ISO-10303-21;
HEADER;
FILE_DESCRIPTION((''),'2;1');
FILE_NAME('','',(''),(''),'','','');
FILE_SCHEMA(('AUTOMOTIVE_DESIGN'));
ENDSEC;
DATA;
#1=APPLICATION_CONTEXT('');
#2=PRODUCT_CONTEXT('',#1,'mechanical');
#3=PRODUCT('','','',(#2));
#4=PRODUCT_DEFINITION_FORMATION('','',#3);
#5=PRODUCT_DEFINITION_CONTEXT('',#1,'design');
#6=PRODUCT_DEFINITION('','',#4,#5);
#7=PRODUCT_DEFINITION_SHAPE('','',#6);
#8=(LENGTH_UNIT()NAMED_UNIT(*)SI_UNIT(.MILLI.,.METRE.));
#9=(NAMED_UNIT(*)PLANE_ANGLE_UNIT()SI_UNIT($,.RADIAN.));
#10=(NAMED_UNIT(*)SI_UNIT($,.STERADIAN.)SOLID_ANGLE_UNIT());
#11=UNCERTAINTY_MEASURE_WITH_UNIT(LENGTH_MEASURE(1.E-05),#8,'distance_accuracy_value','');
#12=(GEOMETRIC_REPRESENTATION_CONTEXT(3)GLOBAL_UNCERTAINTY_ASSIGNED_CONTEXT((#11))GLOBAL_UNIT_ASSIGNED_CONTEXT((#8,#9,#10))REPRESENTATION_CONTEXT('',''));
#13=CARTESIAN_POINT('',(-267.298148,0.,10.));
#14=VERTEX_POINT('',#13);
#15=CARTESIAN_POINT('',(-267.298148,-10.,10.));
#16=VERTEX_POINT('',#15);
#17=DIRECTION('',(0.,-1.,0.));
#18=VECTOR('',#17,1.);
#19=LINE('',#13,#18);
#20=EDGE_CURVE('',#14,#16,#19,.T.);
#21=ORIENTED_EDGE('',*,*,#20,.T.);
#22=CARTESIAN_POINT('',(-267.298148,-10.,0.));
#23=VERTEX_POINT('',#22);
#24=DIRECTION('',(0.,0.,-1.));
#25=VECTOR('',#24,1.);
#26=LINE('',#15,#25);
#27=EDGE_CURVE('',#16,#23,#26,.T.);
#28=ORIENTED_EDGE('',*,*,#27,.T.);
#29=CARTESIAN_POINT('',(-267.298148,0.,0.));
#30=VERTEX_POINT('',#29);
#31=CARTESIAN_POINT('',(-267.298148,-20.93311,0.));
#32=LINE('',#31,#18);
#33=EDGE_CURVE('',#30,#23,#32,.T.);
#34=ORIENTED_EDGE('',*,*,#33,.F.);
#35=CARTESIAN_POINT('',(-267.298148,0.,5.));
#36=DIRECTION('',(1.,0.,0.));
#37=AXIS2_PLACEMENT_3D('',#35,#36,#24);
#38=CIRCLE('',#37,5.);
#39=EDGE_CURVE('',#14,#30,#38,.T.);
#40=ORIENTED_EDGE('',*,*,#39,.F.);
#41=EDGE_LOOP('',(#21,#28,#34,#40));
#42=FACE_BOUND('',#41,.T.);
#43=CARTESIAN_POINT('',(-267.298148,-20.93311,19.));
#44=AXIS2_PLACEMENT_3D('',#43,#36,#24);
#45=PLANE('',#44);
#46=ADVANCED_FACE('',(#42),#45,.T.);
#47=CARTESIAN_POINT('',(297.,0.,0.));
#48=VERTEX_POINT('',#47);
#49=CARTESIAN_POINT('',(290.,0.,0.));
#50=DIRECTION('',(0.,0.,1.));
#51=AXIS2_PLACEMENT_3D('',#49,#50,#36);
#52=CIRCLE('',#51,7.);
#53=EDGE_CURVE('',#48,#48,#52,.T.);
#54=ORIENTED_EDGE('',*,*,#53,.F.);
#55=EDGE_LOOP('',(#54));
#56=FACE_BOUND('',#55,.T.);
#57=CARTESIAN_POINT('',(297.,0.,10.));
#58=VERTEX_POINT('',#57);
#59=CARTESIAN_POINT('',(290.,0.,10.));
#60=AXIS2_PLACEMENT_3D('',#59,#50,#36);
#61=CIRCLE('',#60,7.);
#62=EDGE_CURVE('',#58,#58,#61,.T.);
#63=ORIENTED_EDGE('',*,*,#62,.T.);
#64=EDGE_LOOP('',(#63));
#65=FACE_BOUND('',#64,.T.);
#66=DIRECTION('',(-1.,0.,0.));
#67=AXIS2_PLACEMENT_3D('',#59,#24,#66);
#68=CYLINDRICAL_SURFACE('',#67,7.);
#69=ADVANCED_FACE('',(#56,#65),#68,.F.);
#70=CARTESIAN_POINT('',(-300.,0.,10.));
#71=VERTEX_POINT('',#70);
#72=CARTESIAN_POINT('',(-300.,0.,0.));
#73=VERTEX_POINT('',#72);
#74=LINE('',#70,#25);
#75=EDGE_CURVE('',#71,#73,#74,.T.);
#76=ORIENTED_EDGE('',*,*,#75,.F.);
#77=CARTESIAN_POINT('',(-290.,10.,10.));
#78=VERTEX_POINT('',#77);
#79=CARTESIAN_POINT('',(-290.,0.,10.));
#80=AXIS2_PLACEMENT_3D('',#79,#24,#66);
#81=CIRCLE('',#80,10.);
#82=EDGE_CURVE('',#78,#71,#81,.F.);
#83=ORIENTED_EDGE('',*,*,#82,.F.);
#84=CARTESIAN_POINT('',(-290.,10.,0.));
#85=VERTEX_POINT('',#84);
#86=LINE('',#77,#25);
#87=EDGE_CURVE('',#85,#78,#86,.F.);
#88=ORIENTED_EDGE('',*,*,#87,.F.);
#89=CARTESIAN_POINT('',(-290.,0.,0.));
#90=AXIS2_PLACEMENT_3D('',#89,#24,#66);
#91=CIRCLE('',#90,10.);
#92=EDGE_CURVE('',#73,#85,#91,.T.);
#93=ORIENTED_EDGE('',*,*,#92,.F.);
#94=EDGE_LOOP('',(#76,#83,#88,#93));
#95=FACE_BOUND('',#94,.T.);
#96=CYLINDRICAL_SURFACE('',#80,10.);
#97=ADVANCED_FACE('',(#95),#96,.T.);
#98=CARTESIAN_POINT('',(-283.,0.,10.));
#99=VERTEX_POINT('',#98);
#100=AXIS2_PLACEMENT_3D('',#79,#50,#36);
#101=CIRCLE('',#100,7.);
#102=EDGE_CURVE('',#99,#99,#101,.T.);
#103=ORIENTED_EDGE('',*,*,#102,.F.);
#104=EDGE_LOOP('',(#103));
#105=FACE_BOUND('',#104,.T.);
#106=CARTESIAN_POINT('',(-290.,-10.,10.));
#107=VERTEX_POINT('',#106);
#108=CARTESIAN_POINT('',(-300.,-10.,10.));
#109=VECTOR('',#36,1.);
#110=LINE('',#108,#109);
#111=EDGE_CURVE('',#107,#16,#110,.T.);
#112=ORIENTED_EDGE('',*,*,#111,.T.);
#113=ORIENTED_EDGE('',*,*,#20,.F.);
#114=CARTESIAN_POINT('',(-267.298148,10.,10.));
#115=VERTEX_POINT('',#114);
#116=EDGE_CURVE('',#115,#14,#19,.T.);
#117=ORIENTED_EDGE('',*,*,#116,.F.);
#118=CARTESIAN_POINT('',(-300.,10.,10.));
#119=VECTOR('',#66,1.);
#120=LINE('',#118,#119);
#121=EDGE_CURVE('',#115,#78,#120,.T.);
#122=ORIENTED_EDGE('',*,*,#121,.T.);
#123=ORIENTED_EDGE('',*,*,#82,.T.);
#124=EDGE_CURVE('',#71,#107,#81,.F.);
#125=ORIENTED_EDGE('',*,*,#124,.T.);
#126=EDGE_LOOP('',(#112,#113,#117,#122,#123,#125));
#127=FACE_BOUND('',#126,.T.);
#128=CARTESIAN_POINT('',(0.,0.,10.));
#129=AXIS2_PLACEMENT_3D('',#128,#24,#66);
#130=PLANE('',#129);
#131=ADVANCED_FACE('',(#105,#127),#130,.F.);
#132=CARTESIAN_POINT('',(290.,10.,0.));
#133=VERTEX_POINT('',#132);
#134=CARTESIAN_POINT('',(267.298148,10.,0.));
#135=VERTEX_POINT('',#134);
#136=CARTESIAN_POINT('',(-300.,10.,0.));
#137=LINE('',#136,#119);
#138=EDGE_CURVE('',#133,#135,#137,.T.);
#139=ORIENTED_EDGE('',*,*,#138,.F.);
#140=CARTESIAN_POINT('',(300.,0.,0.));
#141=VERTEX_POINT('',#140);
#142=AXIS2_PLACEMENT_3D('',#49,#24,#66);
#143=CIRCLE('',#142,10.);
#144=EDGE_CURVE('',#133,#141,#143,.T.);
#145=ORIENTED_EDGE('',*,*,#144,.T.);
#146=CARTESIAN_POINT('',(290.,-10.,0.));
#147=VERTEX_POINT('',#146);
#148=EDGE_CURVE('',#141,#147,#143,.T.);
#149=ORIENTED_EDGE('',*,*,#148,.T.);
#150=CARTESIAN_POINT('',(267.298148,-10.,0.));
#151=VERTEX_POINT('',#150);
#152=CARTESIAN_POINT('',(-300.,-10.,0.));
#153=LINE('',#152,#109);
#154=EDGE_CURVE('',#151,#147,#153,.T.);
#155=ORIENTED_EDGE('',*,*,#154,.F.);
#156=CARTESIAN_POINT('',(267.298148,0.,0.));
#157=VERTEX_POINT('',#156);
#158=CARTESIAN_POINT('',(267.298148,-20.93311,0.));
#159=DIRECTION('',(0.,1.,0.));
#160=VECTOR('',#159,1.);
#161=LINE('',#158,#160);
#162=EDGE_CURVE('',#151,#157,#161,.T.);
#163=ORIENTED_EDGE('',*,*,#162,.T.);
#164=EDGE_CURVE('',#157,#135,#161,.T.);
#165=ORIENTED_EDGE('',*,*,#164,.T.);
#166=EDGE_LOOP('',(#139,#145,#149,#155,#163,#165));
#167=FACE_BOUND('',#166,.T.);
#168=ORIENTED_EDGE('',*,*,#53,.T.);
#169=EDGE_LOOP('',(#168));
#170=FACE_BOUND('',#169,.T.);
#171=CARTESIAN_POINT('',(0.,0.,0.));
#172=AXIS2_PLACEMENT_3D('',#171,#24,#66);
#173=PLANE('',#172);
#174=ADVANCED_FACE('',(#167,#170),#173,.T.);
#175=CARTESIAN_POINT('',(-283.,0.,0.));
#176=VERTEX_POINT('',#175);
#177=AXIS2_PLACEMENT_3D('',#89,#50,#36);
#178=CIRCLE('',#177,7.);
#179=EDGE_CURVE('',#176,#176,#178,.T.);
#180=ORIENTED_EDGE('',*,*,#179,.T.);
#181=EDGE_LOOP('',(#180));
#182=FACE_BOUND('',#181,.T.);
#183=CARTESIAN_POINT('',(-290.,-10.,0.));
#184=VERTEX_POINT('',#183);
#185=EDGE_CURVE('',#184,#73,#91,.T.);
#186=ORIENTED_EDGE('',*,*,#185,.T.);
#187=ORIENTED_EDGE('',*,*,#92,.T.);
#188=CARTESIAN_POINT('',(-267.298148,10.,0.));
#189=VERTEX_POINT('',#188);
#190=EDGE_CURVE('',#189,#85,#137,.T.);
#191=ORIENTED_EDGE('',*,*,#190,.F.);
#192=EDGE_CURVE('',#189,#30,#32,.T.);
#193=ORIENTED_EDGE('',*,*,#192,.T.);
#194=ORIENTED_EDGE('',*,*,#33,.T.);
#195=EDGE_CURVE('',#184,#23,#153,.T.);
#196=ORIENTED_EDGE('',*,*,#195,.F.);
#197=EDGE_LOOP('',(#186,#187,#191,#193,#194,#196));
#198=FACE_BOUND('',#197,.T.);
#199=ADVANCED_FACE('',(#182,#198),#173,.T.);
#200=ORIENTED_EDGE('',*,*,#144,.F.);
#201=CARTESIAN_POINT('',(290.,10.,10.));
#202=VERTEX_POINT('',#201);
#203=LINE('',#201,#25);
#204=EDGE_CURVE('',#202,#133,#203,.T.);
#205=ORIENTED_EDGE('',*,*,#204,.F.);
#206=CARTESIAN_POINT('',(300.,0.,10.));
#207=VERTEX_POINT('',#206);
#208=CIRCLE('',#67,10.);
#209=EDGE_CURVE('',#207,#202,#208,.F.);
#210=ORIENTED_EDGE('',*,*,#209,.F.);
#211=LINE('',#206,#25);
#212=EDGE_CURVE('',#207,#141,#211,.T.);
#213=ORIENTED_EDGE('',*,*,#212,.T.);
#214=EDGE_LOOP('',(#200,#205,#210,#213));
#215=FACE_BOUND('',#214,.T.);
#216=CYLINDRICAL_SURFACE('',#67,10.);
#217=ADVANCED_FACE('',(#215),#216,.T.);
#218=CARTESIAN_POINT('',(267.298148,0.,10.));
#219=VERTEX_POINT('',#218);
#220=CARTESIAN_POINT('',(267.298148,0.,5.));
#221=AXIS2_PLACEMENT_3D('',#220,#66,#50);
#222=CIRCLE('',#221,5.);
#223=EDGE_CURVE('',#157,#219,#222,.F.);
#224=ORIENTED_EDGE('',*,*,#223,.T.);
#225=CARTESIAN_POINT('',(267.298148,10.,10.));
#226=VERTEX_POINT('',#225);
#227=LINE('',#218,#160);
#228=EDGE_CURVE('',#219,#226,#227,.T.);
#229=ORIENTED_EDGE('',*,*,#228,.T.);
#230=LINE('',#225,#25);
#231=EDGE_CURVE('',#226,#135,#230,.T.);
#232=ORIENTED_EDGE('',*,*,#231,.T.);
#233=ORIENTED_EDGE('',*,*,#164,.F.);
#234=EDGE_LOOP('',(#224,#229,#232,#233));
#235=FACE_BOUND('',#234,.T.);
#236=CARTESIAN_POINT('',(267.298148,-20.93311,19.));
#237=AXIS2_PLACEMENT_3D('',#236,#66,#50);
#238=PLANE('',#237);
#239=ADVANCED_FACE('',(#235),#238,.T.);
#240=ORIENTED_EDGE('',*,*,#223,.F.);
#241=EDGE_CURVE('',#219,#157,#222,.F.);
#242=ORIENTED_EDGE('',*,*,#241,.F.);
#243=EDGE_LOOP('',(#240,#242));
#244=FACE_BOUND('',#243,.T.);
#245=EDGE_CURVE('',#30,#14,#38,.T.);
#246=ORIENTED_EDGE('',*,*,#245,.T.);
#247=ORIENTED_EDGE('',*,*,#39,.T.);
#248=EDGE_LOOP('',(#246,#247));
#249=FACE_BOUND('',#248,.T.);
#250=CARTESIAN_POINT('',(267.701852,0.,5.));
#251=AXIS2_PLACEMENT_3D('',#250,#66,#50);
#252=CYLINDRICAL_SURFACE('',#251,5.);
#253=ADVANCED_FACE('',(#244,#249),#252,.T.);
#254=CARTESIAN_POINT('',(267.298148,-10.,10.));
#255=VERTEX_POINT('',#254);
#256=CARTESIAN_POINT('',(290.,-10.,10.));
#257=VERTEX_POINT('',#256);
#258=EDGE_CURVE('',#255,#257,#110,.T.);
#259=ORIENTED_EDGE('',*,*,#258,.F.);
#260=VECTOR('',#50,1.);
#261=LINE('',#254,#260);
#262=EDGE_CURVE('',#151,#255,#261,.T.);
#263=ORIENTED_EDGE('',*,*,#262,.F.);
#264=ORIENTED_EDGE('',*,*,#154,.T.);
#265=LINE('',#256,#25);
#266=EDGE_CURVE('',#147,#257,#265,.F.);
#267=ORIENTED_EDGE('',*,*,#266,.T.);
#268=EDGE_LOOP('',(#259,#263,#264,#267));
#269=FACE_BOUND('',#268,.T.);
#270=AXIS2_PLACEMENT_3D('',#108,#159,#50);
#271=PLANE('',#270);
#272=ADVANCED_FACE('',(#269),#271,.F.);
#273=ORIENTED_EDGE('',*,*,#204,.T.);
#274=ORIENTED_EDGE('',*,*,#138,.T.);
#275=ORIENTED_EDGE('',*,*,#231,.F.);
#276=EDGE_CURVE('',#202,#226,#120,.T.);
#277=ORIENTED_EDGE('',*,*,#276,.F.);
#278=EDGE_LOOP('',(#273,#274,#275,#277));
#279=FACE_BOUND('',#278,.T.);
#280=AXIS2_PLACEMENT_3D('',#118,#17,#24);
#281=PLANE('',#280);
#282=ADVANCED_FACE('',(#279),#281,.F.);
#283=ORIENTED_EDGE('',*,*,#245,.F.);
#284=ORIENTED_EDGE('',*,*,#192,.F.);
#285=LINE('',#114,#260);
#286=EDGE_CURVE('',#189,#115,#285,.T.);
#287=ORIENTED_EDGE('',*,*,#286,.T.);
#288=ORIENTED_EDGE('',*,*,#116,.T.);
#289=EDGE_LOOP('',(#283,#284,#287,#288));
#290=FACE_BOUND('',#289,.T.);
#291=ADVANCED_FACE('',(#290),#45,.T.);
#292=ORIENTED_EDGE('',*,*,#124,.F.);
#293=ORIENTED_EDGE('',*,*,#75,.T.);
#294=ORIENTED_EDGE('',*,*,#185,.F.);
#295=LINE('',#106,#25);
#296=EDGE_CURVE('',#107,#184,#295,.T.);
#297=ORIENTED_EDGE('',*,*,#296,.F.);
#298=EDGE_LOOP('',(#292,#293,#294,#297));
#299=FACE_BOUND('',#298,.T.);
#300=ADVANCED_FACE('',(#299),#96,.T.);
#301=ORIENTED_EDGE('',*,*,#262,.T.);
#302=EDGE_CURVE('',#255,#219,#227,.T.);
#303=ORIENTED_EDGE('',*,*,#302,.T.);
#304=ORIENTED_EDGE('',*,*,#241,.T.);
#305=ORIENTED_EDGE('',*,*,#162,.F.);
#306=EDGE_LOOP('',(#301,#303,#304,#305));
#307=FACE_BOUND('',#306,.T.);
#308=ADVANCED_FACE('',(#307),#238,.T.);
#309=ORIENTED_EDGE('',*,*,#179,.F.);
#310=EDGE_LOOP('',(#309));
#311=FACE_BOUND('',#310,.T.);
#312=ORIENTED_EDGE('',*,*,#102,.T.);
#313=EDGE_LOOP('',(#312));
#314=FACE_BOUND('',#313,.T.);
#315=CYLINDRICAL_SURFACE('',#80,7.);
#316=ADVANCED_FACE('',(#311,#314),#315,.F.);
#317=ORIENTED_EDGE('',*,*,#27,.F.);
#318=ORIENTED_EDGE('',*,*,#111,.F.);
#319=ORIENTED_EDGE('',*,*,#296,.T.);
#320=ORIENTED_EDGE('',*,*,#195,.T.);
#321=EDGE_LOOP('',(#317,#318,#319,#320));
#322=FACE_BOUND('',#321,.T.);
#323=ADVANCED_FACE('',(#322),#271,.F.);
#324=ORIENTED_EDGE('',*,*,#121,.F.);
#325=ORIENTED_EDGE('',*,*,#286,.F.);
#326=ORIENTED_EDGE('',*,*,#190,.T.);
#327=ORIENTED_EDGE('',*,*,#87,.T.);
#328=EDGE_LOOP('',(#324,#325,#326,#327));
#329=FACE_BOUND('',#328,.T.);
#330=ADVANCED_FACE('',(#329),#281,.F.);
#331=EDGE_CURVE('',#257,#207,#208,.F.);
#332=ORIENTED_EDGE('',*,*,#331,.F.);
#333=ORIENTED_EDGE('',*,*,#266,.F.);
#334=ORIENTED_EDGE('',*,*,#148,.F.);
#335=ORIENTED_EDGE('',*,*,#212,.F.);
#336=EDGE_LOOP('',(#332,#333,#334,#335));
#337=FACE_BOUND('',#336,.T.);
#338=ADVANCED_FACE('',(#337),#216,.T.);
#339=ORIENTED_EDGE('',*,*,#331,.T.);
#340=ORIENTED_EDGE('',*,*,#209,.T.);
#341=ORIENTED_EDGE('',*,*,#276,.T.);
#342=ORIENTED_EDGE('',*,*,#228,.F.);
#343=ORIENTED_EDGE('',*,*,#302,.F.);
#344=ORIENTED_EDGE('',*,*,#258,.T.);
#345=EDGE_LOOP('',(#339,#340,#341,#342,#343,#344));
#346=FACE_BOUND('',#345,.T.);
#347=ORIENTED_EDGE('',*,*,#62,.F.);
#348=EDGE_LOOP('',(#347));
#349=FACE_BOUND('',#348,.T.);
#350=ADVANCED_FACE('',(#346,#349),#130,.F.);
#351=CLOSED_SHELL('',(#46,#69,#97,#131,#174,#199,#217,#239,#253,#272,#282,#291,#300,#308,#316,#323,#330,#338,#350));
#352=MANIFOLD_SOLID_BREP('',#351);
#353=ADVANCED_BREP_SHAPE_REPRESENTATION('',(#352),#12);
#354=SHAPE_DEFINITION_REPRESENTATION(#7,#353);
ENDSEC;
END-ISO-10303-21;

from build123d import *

# Parameters (mm, degrees)
SKETCH_1_W          = 600
SKETCH_1_H          = 20
SKETCH_1_R          = 7
EXTRUDE_1_DEPTH     = 10
FILLET_1_R          = 10
SKETCH1_W           = 534.59629528
SKETCH1_H           = 41.86621972
CUT_EXTRUDE1_DEPTH  = 19
SKETCH2_R           = 5
BOSS_EXTRUDE1_DEPTH = 535


with BuildPart() as part:
    # 草图1 → 凸台-拉伸1 (new body)
    with BuildSketch(Plane.XY):
        Rectangle(SKETCH_1_W, SKETCH_1_H)
        with Locations((-290, 0)):
            Circle(SKETCH_1_R, mode=Mode.SUBTRACT)
        with Locations((290, 0)):
            Circle(SKETCH_1_R, mode=Mode.SUBTRACT)
    extrude(amount=EXTRUDE_1_DEPTH)

    # 圆角1
    fillet_1_edges = [part.edges().sort_by_distance(p)[0] for p in [
        (300, 10, 5),
        (300, -10, 5),
        (-300, -10, 5),
        (-300, 10, 5),
    ]]
    fillet(fillet_1_edges, radius=FILLET_1_R - 0.0001)  # a hair under: the kernel refuses the full size

    # Sketch1 → Cut-Extrude1 (cut)
    with BuildSketch(Plane.XY):
        Rectangle(SKETCH1_W, SKETCH1_H)
    extrude(amount=CUT_EXTRUDE1_DEPTH, mode=Mode.SUBTRACT)


with BuildPart() as cut_extrude1_piece_1:
    # of the separate pieces the step leaves, piece 1, a body of its own (cut_extrude1_pieces)
    add(part.part.solids().sort_by_distance((-290.0001, -10, 0))[0])



with BuildPart() as cut_extrude1_piece_2:
    # of the separate pieces the step leaves, piece 2, a body of its own (cut_extrude1_pieces)
    add(part.part.solids().sort_by_distance((267.29814764, -10, 0))[0])


with BuildPart() as cut_extrude1_piece_1_1:
    add(cut_extrude1_piece_1.part)

    add(cut_extrude1_piece_2.part)  # Boss-Extrude1 merges Cut-Extrude1 piece 2
    # Sketch2 → Boss-Extrude1 (add)
    with BuildSketch(Plane(origin=(-267.29814764, 0, 0), x_dir=(0, 0, -1), z_dir=(1, 0, 0))):
        with Locations(Location((-5, 0, 0), (0, 0, 180))):
            Circle(SKETCH2_R)
    extrude(amount=BOSS_EXTRUDE1_DEPTH)


solid = cut_extrude1_piece_1_1.part
